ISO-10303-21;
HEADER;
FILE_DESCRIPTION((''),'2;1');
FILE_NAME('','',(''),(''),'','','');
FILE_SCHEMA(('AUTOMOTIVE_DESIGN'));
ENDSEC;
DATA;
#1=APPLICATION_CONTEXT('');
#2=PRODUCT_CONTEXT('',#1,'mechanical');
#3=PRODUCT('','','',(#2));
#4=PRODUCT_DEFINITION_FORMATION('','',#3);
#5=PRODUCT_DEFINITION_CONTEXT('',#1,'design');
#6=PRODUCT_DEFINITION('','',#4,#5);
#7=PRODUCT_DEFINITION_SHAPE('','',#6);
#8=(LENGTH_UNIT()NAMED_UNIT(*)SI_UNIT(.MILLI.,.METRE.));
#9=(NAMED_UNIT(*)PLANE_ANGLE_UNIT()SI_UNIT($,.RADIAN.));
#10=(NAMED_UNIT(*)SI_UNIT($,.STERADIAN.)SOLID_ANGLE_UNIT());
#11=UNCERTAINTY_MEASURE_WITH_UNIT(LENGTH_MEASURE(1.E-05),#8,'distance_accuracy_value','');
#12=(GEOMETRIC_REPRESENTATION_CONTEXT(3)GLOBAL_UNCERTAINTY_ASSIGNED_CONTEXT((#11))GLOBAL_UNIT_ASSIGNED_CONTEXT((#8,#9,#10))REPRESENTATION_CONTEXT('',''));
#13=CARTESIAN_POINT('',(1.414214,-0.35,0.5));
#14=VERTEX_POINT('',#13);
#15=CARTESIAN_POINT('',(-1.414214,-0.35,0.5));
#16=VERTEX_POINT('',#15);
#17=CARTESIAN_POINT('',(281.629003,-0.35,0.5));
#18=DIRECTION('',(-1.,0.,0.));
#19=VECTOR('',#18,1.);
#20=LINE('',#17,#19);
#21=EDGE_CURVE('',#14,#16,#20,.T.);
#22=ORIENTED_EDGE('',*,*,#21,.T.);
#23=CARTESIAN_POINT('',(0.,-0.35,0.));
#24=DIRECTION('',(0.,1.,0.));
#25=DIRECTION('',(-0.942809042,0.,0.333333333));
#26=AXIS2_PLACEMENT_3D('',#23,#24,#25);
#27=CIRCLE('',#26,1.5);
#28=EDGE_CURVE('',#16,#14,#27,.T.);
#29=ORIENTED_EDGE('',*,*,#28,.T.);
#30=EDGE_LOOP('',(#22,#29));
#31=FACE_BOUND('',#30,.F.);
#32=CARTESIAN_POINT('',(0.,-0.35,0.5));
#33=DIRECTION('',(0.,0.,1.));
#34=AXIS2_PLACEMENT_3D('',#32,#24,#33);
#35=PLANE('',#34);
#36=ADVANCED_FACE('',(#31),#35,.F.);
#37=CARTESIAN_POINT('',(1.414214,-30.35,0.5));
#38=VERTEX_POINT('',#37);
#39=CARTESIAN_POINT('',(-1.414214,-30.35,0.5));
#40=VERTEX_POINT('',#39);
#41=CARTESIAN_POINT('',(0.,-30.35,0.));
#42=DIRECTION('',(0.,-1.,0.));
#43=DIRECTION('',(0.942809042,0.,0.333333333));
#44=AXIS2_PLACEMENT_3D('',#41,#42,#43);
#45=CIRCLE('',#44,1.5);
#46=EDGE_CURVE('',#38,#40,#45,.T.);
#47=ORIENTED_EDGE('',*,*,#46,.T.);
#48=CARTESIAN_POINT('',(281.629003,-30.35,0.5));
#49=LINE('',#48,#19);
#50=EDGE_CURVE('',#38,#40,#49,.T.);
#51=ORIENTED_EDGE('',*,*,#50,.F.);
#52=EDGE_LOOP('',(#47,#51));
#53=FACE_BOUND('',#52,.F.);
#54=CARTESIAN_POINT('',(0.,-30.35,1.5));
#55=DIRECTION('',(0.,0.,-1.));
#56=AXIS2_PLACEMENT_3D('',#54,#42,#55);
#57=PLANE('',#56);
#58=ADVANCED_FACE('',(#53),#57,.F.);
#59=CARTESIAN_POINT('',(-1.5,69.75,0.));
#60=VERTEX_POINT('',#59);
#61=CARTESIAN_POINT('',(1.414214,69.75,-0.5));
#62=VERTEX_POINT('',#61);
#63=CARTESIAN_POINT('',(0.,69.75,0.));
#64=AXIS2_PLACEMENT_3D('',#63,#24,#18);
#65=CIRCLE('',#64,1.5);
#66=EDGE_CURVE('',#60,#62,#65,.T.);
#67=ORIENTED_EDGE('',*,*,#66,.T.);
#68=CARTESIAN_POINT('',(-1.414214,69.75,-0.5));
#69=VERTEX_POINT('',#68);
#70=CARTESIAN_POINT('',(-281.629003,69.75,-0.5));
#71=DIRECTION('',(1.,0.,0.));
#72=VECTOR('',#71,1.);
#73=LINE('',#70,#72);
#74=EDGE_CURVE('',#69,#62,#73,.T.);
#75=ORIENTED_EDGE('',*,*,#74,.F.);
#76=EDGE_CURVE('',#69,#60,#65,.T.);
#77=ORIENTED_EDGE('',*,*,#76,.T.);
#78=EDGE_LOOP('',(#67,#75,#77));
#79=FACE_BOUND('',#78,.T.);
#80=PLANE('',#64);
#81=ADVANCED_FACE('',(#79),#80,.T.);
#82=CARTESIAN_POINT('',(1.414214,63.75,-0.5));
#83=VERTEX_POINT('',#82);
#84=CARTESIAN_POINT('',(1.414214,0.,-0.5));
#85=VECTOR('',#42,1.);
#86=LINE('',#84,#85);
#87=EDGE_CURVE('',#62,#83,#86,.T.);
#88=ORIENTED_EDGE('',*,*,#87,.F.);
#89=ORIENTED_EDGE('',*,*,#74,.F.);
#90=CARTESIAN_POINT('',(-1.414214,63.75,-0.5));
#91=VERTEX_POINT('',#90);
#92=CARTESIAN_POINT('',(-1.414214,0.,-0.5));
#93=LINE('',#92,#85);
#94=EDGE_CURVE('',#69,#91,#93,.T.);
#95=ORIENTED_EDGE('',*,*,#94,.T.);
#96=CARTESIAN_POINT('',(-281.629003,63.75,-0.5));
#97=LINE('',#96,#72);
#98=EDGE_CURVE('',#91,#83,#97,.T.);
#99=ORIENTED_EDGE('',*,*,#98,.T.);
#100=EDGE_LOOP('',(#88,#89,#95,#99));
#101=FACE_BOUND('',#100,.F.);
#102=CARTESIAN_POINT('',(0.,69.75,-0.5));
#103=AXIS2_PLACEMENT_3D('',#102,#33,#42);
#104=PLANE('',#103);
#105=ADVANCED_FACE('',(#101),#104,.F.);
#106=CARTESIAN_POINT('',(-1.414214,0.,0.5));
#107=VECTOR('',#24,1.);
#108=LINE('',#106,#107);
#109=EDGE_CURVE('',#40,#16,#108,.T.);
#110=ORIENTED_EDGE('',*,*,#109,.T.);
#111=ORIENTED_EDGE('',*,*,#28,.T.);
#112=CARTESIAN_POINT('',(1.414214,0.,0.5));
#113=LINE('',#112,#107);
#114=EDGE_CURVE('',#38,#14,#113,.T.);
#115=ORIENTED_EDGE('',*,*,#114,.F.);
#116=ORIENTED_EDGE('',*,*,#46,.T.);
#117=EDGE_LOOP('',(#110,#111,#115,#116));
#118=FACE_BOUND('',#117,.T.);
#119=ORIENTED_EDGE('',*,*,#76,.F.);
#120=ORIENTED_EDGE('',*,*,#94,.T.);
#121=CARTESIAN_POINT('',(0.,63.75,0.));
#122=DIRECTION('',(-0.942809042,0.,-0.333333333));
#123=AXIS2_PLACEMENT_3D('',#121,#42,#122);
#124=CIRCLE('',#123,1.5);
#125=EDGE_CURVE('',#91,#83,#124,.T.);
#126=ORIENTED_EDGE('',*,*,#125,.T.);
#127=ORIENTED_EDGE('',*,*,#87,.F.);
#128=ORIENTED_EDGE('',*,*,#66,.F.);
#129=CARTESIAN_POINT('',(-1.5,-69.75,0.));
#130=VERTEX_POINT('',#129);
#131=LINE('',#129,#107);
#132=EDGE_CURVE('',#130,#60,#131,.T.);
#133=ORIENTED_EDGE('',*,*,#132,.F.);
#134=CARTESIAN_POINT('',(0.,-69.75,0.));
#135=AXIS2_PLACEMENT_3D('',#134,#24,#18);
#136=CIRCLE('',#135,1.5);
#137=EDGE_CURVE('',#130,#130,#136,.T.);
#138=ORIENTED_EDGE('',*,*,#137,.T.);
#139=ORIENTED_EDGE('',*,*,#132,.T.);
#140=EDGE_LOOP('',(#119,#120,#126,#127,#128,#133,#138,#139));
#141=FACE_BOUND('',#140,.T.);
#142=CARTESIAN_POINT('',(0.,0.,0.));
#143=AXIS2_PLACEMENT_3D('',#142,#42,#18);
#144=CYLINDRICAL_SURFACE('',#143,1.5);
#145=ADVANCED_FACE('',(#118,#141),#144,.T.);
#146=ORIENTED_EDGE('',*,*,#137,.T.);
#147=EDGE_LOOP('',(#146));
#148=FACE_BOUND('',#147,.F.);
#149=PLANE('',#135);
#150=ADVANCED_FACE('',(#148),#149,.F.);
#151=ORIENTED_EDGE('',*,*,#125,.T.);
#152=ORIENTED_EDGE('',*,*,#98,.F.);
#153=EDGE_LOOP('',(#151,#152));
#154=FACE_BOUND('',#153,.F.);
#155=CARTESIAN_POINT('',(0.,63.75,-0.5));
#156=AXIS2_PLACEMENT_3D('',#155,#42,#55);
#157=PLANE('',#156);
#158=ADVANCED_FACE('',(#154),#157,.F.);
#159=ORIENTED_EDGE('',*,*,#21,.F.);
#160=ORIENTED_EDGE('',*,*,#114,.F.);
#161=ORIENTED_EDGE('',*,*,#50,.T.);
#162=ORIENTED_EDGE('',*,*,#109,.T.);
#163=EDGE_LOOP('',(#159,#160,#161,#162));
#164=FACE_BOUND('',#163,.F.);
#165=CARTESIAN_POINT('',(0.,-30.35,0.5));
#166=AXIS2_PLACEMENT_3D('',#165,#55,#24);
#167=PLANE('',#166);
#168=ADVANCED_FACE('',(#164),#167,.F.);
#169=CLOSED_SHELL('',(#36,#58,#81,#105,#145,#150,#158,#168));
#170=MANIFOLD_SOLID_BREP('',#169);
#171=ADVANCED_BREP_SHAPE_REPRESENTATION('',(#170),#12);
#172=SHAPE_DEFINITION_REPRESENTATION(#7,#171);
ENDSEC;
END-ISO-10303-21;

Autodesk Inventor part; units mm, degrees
ref_plane "YZ Plane" through (0, 0, 0) normal (1, 0, 0) x (0, 1, 0)
ref_plane "XZ Plane" through (0, 0, 0) normal (0, 1, 0) x (-1, 0, 0)
ref_plane "XY Plane" through (0, 0, 0) normal (0, 0, 1) x (1, 0, 0)
sketch "Sketch4" plane through (0, 0, 0) normal (0, 1, 0) x (-1, 0, 0)
  circle A0 centre (0, 0) radius 1.5
extrude "Extrusion2" add sketch "Sketch4" along normal mid plane 139.5
sketch "Sketch13" plane through (0, 0, 0) normal (1, 0, 0) x (0, 1, 0)
  line L0 (70.3754, -0.5) -> (63.75, -0.5)
  line L1 (63.75, -0.5) -> (63.75, -2.4686)
  line L2 (63.75, -2.4686) -> (70.3754, -2.4686)
  line L3 (70.3754, -2.4686) -> (70.3754, -0.5)
  line L4 (-69.75, -1.5) -> (69.75, -1.5) projected
  line L5 (69.75, -1.5) -> (69.75, 1.5) projected
  line L6 (-0.35, 2.5026) -> (-30.35, 2.5026)
  line L7 (-30.35, 2.5026) -> (-30.35, 0.5)
  line L8 (-30.35, 0.5) -> (-0.35, 0.5)
  line L9 (-0.35, 0.5) -> (-0.35, 2.5026)
  line L10 (-69.75, 1.5) -> (69.75, 1.5) projected
  line L11 (-69.75, 1.5) -> (-69.75, -1.5) projected
  point P0 (0, 0)
  point P1 (-0.35, 1.5)
  point P2 (-30.35, 1.5)
  point P3 (69.75, -0.5)
  point P4 (63.75, -1.5)
  dimension "d89" = 1
  dimension "d90" = 6
  dimension "d91" = 1
  dimension "d92" = 30
  dimension "d93" = 39.4
extrude "Extrusion9" cut sketch "Sketch13" against normal through all both and the other way through all contours L5 L4 L1 L0 | L9 L8 L7 L10
properties part number "Wheel Shaft 125mm" material "Bronze, Soft Tin"
